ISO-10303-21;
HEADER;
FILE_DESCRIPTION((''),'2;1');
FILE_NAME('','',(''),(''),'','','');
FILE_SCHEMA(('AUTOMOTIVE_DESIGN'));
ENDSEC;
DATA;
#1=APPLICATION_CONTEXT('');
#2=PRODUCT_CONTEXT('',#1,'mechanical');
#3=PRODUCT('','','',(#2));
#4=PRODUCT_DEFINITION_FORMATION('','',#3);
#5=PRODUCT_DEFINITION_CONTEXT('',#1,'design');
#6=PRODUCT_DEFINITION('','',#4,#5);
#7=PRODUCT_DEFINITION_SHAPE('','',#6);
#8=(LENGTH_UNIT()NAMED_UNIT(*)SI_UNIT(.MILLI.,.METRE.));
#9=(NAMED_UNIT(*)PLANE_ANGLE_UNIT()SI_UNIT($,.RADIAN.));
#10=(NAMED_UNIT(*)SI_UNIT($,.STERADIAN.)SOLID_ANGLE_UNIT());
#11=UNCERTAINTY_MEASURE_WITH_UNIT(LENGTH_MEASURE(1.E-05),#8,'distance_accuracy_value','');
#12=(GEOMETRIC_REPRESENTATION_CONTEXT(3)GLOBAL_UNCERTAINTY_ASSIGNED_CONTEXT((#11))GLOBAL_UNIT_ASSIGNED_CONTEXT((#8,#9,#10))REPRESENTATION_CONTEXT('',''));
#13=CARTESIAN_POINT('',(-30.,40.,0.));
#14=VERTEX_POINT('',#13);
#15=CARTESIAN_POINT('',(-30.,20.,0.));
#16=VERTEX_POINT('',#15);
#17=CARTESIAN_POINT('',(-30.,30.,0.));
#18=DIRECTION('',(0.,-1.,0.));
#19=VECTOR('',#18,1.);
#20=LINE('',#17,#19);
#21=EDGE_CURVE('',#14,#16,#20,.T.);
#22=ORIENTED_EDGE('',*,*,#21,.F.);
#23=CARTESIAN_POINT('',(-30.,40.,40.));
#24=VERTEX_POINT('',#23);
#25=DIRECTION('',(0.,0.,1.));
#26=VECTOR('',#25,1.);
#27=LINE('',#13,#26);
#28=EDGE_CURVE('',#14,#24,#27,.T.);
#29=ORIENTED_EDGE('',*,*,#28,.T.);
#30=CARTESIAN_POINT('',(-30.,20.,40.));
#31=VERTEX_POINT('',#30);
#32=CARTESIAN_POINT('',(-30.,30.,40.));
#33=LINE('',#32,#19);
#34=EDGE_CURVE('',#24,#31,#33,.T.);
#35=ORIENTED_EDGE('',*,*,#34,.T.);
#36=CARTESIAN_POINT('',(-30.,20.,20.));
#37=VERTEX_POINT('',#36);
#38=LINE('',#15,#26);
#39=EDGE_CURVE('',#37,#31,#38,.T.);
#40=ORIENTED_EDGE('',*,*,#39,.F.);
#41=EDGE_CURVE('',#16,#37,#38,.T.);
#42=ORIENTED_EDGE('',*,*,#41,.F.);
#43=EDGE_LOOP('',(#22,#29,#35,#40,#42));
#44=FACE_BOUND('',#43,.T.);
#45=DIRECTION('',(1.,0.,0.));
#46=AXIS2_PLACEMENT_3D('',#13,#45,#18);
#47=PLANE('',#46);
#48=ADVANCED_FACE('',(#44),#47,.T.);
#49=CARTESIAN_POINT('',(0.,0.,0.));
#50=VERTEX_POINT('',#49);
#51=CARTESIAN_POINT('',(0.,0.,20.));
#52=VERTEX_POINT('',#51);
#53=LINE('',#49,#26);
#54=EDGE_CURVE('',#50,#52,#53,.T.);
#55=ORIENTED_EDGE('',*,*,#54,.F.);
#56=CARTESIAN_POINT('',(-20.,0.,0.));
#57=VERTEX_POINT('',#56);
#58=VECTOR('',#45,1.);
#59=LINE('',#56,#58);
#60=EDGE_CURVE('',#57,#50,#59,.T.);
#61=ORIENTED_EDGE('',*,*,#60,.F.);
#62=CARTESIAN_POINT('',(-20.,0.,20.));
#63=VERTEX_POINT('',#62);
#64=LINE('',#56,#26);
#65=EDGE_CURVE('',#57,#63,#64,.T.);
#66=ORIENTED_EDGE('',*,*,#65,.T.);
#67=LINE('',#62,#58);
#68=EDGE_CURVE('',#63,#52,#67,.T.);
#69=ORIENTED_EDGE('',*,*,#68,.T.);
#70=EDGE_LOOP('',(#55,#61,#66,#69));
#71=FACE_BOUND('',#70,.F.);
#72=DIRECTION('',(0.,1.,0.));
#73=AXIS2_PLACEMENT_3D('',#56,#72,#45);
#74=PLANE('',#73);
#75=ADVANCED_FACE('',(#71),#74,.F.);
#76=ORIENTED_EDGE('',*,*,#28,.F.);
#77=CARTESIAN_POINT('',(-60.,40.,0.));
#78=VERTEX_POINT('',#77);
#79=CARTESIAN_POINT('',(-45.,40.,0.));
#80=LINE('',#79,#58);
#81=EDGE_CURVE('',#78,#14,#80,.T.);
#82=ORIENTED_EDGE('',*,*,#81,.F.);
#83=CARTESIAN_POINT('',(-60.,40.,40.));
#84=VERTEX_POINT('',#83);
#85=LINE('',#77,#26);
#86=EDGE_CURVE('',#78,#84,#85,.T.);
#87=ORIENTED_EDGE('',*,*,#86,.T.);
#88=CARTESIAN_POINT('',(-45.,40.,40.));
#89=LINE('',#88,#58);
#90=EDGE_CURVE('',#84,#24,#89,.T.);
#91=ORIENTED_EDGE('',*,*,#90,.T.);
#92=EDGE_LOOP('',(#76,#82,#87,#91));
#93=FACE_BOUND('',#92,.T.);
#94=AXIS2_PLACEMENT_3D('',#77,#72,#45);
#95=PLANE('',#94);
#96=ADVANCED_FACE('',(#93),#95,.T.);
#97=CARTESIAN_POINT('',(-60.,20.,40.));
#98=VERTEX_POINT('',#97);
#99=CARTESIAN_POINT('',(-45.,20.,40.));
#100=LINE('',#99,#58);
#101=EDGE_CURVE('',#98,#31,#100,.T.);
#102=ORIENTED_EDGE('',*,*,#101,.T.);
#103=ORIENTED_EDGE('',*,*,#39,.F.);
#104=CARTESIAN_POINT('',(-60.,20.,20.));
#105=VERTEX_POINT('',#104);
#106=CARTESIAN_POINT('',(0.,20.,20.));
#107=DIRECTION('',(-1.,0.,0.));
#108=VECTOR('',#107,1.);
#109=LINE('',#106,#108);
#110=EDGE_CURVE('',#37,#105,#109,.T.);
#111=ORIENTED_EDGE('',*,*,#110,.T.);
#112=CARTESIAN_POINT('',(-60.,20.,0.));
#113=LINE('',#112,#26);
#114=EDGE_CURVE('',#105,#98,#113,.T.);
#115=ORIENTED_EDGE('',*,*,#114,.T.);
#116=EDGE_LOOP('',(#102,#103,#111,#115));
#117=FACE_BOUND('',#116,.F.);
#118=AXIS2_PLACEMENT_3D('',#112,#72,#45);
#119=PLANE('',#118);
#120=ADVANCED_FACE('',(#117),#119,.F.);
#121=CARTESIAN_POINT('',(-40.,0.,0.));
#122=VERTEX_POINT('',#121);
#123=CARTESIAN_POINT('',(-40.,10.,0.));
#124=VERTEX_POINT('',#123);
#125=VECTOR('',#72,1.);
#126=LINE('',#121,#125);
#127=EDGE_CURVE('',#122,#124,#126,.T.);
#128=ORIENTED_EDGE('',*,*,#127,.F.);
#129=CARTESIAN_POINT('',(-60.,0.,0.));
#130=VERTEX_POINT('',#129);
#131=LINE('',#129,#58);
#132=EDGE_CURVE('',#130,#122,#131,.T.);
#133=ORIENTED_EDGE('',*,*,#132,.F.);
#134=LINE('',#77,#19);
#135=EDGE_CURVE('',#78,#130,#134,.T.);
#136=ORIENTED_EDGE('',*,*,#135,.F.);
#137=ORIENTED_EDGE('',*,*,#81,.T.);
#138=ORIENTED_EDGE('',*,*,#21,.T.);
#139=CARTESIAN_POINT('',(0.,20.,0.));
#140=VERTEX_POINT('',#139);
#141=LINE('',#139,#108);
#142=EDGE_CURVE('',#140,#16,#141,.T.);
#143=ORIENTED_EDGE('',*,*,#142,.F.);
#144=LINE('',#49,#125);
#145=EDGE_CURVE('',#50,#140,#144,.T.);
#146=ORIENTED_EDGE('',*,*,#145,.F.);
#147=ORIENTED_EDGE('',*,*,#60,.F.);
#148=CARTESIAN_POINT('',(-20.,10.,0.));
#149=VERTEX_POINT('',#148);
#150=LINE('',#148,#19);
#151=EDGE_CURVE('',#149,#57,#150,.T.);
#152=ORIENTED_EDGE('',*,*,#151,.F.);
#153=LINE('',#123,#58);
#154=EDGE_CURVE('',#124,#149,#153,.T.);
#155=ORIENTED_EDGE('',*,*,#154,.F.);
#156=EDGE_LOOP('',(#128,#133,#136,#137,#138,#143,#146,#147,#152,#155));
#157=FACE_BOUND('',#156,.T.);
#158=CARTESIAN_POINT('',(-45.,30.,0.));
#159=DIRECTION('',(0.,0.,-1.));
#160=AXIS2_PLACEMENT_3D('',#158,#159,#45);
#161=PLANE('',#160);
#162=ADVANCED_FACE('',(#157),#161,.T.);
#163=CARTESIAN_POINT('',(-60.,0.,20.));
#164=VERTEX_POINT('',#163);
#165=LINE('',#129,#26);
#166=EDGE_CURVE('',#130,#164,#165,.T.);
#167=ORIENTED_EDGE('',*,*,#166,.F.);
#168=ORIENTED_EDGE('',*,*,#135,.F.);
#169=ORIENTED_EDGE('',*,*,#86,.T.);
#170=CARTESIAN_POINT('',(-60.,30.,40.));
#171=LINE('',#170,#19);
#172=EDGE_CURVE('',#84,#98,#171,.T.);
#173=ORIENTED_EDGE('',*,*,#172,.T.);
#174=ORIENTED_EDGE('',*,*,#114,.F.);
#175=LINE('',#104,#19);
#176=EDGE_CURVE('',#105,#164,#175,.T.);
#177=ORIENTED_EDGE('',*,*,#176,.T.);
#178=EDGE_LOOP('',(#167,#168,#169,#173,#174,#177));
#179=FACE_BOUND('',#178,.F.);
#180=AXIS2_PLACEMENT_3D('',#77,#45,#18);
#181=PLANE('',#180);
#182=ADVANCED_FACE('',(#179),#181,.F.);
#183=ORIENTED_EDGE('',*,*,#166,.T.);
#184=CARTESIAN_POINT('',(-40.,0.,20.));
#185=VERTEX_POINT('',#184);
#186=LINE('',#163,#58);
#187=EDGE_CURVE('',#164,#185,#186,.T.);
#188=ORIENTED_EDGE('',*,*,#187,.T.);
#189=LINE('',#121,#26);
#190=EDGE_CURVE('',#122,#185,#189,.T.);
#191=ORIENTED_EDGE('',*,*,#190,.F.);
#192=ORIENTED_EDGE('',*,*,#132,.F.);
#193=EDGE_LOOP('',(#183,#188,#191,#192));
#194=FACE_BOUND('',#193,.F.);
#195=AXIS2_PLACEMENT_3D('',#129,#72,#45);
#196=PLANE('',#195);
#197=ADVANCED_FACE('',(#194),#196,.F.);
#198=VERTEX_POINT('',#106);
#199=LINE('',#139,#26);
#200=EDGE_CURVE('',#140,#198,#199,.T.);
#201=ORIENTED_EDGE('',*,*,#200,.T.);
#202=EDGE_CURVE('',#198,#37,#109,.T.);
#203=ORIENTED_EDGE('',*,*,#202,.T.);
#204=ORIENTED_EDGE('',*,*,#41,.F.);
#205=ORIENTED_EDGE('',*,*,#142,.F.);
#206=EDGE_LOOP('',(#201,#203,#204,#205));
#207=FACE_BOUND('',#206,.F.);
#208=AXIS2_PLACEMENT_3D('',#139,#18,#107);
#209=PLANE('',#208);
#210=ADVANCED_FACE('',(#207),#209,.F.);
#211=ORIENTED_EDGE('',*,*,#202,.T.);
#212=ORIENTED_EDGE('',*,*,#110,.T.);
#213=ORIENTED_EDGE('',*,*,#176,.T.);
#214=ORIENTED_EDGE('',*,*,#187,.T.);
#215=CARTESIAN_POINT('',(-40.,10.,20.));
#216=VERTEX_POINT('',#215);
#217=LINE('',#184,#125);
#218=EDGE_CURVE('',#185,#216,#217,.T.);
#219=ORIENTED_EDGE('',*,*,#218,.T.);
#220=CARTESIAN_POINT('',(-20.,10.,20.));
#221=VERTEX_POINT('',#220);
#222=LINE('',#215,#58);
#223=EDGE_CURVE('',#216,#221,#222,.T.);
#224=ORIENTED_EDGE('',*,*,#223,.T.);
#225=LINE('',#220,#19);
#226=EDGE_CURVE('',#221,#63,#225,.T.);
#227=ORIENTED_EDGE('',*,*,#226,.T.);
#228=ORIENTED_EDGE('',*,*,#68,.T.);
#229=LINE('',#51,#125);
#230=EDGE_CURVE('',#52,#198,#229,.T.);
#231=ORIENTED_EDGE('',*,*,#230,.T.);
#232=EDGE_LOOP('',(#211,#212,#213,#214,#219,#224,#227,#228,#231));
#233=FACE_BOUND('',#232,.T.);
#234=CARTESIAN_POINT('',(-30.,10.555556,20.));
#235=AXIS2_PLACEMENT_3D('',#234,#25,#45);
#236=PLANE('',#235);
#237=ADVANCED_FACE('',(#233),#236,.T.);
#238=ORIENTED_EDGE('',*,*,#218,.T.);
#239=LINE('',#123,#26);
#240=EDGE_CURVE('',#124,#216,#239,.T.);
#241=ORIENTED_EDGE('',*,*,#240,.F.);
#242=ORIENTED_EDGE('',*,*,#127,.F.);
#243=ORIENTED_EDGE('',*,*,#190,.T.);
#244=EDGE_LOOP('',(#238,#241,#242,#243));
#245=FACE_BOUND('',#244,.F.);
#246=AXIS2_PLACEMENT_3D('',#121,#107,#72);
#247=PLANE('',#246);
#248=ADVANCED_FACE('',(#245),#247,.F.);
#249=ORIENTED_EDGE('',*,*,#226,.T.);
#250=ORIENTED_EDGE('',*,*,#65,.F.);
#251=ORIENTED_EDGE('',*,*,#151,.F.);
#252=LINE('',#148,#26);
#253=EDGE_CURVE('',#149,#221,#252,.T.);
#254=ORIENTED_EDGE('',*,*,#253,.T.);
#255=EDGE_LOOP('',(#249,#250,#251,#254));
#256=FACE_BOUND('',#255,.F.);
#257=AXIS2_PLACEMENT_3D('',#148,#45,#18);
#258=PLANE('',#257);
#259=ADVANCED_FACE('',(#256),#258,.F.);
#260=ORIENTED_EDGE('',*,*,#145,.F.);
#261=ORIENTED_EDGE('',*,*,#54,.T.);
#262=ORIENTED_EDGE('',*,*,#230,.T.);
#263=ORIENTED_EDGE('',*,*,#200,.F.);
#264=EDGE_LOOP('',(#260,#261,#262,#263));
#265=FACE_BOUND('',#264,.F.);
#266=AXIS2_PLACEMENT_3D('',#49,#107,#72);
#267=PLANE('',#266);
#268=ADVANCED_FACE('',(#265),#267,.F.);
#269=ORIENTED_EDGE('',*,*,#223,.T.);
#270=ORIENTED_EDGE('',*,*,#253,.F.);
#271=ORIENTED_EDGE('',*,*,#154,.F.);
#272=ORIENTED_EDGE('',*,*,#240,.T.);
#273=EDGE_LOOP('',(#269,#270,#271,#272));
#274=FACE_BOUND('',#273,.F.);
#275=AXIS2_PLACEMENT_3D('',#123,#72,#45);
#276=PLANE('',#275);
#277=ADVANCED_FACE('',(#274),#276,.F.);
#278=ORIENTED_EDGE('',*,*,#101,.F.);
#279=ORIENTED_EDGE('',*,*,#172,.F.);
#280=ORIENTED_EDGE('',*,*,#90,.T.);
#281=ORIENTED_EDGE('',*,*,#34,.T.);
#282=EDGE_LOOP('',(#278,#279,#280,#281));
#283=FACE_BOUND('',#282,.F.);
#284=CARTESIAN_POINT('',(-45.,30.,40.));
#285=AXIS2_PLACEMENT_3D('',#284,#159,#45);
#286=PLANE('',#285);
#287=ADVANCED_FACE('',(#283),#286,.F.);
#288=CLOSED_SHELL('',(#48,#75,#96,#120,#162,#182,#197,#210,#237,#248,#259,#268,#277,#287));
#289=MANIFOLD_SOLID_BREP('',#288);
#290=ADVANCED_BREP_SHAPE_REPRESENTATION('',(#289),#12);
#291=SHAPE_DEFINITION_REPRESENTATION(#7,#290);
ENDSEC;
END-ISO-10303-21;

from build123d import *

# Parameters (mm, degrees)
F1_DEPTH = 20
F2_W     = 30
F2_H     = 20
F3_DEPTH = 40


with BuildPart() as f1:
    # F0 (on Top) → F1 (new body)
    with BuildSketch(Plane.XY):
        Polygon((-20, 0), (0, 0), (0, 20), (-60, 20), (-60, 0), (-40, 0), (-40, 10), (-20, 10), align=None)
    extrude(amount=F1_DEPTH)

    # F2 (on face) → F3 (join)
    with BuildSketch(Plane(origin=(0, 0, 0), x_dir=(1, 0, 0), z_dir=(0, 0, -1))):
        with Locations((-45, -30)):
            Rectangle(F2_W, F2_H)
    extrude(amount=-F3_DEPTH)


solid = f1.part
